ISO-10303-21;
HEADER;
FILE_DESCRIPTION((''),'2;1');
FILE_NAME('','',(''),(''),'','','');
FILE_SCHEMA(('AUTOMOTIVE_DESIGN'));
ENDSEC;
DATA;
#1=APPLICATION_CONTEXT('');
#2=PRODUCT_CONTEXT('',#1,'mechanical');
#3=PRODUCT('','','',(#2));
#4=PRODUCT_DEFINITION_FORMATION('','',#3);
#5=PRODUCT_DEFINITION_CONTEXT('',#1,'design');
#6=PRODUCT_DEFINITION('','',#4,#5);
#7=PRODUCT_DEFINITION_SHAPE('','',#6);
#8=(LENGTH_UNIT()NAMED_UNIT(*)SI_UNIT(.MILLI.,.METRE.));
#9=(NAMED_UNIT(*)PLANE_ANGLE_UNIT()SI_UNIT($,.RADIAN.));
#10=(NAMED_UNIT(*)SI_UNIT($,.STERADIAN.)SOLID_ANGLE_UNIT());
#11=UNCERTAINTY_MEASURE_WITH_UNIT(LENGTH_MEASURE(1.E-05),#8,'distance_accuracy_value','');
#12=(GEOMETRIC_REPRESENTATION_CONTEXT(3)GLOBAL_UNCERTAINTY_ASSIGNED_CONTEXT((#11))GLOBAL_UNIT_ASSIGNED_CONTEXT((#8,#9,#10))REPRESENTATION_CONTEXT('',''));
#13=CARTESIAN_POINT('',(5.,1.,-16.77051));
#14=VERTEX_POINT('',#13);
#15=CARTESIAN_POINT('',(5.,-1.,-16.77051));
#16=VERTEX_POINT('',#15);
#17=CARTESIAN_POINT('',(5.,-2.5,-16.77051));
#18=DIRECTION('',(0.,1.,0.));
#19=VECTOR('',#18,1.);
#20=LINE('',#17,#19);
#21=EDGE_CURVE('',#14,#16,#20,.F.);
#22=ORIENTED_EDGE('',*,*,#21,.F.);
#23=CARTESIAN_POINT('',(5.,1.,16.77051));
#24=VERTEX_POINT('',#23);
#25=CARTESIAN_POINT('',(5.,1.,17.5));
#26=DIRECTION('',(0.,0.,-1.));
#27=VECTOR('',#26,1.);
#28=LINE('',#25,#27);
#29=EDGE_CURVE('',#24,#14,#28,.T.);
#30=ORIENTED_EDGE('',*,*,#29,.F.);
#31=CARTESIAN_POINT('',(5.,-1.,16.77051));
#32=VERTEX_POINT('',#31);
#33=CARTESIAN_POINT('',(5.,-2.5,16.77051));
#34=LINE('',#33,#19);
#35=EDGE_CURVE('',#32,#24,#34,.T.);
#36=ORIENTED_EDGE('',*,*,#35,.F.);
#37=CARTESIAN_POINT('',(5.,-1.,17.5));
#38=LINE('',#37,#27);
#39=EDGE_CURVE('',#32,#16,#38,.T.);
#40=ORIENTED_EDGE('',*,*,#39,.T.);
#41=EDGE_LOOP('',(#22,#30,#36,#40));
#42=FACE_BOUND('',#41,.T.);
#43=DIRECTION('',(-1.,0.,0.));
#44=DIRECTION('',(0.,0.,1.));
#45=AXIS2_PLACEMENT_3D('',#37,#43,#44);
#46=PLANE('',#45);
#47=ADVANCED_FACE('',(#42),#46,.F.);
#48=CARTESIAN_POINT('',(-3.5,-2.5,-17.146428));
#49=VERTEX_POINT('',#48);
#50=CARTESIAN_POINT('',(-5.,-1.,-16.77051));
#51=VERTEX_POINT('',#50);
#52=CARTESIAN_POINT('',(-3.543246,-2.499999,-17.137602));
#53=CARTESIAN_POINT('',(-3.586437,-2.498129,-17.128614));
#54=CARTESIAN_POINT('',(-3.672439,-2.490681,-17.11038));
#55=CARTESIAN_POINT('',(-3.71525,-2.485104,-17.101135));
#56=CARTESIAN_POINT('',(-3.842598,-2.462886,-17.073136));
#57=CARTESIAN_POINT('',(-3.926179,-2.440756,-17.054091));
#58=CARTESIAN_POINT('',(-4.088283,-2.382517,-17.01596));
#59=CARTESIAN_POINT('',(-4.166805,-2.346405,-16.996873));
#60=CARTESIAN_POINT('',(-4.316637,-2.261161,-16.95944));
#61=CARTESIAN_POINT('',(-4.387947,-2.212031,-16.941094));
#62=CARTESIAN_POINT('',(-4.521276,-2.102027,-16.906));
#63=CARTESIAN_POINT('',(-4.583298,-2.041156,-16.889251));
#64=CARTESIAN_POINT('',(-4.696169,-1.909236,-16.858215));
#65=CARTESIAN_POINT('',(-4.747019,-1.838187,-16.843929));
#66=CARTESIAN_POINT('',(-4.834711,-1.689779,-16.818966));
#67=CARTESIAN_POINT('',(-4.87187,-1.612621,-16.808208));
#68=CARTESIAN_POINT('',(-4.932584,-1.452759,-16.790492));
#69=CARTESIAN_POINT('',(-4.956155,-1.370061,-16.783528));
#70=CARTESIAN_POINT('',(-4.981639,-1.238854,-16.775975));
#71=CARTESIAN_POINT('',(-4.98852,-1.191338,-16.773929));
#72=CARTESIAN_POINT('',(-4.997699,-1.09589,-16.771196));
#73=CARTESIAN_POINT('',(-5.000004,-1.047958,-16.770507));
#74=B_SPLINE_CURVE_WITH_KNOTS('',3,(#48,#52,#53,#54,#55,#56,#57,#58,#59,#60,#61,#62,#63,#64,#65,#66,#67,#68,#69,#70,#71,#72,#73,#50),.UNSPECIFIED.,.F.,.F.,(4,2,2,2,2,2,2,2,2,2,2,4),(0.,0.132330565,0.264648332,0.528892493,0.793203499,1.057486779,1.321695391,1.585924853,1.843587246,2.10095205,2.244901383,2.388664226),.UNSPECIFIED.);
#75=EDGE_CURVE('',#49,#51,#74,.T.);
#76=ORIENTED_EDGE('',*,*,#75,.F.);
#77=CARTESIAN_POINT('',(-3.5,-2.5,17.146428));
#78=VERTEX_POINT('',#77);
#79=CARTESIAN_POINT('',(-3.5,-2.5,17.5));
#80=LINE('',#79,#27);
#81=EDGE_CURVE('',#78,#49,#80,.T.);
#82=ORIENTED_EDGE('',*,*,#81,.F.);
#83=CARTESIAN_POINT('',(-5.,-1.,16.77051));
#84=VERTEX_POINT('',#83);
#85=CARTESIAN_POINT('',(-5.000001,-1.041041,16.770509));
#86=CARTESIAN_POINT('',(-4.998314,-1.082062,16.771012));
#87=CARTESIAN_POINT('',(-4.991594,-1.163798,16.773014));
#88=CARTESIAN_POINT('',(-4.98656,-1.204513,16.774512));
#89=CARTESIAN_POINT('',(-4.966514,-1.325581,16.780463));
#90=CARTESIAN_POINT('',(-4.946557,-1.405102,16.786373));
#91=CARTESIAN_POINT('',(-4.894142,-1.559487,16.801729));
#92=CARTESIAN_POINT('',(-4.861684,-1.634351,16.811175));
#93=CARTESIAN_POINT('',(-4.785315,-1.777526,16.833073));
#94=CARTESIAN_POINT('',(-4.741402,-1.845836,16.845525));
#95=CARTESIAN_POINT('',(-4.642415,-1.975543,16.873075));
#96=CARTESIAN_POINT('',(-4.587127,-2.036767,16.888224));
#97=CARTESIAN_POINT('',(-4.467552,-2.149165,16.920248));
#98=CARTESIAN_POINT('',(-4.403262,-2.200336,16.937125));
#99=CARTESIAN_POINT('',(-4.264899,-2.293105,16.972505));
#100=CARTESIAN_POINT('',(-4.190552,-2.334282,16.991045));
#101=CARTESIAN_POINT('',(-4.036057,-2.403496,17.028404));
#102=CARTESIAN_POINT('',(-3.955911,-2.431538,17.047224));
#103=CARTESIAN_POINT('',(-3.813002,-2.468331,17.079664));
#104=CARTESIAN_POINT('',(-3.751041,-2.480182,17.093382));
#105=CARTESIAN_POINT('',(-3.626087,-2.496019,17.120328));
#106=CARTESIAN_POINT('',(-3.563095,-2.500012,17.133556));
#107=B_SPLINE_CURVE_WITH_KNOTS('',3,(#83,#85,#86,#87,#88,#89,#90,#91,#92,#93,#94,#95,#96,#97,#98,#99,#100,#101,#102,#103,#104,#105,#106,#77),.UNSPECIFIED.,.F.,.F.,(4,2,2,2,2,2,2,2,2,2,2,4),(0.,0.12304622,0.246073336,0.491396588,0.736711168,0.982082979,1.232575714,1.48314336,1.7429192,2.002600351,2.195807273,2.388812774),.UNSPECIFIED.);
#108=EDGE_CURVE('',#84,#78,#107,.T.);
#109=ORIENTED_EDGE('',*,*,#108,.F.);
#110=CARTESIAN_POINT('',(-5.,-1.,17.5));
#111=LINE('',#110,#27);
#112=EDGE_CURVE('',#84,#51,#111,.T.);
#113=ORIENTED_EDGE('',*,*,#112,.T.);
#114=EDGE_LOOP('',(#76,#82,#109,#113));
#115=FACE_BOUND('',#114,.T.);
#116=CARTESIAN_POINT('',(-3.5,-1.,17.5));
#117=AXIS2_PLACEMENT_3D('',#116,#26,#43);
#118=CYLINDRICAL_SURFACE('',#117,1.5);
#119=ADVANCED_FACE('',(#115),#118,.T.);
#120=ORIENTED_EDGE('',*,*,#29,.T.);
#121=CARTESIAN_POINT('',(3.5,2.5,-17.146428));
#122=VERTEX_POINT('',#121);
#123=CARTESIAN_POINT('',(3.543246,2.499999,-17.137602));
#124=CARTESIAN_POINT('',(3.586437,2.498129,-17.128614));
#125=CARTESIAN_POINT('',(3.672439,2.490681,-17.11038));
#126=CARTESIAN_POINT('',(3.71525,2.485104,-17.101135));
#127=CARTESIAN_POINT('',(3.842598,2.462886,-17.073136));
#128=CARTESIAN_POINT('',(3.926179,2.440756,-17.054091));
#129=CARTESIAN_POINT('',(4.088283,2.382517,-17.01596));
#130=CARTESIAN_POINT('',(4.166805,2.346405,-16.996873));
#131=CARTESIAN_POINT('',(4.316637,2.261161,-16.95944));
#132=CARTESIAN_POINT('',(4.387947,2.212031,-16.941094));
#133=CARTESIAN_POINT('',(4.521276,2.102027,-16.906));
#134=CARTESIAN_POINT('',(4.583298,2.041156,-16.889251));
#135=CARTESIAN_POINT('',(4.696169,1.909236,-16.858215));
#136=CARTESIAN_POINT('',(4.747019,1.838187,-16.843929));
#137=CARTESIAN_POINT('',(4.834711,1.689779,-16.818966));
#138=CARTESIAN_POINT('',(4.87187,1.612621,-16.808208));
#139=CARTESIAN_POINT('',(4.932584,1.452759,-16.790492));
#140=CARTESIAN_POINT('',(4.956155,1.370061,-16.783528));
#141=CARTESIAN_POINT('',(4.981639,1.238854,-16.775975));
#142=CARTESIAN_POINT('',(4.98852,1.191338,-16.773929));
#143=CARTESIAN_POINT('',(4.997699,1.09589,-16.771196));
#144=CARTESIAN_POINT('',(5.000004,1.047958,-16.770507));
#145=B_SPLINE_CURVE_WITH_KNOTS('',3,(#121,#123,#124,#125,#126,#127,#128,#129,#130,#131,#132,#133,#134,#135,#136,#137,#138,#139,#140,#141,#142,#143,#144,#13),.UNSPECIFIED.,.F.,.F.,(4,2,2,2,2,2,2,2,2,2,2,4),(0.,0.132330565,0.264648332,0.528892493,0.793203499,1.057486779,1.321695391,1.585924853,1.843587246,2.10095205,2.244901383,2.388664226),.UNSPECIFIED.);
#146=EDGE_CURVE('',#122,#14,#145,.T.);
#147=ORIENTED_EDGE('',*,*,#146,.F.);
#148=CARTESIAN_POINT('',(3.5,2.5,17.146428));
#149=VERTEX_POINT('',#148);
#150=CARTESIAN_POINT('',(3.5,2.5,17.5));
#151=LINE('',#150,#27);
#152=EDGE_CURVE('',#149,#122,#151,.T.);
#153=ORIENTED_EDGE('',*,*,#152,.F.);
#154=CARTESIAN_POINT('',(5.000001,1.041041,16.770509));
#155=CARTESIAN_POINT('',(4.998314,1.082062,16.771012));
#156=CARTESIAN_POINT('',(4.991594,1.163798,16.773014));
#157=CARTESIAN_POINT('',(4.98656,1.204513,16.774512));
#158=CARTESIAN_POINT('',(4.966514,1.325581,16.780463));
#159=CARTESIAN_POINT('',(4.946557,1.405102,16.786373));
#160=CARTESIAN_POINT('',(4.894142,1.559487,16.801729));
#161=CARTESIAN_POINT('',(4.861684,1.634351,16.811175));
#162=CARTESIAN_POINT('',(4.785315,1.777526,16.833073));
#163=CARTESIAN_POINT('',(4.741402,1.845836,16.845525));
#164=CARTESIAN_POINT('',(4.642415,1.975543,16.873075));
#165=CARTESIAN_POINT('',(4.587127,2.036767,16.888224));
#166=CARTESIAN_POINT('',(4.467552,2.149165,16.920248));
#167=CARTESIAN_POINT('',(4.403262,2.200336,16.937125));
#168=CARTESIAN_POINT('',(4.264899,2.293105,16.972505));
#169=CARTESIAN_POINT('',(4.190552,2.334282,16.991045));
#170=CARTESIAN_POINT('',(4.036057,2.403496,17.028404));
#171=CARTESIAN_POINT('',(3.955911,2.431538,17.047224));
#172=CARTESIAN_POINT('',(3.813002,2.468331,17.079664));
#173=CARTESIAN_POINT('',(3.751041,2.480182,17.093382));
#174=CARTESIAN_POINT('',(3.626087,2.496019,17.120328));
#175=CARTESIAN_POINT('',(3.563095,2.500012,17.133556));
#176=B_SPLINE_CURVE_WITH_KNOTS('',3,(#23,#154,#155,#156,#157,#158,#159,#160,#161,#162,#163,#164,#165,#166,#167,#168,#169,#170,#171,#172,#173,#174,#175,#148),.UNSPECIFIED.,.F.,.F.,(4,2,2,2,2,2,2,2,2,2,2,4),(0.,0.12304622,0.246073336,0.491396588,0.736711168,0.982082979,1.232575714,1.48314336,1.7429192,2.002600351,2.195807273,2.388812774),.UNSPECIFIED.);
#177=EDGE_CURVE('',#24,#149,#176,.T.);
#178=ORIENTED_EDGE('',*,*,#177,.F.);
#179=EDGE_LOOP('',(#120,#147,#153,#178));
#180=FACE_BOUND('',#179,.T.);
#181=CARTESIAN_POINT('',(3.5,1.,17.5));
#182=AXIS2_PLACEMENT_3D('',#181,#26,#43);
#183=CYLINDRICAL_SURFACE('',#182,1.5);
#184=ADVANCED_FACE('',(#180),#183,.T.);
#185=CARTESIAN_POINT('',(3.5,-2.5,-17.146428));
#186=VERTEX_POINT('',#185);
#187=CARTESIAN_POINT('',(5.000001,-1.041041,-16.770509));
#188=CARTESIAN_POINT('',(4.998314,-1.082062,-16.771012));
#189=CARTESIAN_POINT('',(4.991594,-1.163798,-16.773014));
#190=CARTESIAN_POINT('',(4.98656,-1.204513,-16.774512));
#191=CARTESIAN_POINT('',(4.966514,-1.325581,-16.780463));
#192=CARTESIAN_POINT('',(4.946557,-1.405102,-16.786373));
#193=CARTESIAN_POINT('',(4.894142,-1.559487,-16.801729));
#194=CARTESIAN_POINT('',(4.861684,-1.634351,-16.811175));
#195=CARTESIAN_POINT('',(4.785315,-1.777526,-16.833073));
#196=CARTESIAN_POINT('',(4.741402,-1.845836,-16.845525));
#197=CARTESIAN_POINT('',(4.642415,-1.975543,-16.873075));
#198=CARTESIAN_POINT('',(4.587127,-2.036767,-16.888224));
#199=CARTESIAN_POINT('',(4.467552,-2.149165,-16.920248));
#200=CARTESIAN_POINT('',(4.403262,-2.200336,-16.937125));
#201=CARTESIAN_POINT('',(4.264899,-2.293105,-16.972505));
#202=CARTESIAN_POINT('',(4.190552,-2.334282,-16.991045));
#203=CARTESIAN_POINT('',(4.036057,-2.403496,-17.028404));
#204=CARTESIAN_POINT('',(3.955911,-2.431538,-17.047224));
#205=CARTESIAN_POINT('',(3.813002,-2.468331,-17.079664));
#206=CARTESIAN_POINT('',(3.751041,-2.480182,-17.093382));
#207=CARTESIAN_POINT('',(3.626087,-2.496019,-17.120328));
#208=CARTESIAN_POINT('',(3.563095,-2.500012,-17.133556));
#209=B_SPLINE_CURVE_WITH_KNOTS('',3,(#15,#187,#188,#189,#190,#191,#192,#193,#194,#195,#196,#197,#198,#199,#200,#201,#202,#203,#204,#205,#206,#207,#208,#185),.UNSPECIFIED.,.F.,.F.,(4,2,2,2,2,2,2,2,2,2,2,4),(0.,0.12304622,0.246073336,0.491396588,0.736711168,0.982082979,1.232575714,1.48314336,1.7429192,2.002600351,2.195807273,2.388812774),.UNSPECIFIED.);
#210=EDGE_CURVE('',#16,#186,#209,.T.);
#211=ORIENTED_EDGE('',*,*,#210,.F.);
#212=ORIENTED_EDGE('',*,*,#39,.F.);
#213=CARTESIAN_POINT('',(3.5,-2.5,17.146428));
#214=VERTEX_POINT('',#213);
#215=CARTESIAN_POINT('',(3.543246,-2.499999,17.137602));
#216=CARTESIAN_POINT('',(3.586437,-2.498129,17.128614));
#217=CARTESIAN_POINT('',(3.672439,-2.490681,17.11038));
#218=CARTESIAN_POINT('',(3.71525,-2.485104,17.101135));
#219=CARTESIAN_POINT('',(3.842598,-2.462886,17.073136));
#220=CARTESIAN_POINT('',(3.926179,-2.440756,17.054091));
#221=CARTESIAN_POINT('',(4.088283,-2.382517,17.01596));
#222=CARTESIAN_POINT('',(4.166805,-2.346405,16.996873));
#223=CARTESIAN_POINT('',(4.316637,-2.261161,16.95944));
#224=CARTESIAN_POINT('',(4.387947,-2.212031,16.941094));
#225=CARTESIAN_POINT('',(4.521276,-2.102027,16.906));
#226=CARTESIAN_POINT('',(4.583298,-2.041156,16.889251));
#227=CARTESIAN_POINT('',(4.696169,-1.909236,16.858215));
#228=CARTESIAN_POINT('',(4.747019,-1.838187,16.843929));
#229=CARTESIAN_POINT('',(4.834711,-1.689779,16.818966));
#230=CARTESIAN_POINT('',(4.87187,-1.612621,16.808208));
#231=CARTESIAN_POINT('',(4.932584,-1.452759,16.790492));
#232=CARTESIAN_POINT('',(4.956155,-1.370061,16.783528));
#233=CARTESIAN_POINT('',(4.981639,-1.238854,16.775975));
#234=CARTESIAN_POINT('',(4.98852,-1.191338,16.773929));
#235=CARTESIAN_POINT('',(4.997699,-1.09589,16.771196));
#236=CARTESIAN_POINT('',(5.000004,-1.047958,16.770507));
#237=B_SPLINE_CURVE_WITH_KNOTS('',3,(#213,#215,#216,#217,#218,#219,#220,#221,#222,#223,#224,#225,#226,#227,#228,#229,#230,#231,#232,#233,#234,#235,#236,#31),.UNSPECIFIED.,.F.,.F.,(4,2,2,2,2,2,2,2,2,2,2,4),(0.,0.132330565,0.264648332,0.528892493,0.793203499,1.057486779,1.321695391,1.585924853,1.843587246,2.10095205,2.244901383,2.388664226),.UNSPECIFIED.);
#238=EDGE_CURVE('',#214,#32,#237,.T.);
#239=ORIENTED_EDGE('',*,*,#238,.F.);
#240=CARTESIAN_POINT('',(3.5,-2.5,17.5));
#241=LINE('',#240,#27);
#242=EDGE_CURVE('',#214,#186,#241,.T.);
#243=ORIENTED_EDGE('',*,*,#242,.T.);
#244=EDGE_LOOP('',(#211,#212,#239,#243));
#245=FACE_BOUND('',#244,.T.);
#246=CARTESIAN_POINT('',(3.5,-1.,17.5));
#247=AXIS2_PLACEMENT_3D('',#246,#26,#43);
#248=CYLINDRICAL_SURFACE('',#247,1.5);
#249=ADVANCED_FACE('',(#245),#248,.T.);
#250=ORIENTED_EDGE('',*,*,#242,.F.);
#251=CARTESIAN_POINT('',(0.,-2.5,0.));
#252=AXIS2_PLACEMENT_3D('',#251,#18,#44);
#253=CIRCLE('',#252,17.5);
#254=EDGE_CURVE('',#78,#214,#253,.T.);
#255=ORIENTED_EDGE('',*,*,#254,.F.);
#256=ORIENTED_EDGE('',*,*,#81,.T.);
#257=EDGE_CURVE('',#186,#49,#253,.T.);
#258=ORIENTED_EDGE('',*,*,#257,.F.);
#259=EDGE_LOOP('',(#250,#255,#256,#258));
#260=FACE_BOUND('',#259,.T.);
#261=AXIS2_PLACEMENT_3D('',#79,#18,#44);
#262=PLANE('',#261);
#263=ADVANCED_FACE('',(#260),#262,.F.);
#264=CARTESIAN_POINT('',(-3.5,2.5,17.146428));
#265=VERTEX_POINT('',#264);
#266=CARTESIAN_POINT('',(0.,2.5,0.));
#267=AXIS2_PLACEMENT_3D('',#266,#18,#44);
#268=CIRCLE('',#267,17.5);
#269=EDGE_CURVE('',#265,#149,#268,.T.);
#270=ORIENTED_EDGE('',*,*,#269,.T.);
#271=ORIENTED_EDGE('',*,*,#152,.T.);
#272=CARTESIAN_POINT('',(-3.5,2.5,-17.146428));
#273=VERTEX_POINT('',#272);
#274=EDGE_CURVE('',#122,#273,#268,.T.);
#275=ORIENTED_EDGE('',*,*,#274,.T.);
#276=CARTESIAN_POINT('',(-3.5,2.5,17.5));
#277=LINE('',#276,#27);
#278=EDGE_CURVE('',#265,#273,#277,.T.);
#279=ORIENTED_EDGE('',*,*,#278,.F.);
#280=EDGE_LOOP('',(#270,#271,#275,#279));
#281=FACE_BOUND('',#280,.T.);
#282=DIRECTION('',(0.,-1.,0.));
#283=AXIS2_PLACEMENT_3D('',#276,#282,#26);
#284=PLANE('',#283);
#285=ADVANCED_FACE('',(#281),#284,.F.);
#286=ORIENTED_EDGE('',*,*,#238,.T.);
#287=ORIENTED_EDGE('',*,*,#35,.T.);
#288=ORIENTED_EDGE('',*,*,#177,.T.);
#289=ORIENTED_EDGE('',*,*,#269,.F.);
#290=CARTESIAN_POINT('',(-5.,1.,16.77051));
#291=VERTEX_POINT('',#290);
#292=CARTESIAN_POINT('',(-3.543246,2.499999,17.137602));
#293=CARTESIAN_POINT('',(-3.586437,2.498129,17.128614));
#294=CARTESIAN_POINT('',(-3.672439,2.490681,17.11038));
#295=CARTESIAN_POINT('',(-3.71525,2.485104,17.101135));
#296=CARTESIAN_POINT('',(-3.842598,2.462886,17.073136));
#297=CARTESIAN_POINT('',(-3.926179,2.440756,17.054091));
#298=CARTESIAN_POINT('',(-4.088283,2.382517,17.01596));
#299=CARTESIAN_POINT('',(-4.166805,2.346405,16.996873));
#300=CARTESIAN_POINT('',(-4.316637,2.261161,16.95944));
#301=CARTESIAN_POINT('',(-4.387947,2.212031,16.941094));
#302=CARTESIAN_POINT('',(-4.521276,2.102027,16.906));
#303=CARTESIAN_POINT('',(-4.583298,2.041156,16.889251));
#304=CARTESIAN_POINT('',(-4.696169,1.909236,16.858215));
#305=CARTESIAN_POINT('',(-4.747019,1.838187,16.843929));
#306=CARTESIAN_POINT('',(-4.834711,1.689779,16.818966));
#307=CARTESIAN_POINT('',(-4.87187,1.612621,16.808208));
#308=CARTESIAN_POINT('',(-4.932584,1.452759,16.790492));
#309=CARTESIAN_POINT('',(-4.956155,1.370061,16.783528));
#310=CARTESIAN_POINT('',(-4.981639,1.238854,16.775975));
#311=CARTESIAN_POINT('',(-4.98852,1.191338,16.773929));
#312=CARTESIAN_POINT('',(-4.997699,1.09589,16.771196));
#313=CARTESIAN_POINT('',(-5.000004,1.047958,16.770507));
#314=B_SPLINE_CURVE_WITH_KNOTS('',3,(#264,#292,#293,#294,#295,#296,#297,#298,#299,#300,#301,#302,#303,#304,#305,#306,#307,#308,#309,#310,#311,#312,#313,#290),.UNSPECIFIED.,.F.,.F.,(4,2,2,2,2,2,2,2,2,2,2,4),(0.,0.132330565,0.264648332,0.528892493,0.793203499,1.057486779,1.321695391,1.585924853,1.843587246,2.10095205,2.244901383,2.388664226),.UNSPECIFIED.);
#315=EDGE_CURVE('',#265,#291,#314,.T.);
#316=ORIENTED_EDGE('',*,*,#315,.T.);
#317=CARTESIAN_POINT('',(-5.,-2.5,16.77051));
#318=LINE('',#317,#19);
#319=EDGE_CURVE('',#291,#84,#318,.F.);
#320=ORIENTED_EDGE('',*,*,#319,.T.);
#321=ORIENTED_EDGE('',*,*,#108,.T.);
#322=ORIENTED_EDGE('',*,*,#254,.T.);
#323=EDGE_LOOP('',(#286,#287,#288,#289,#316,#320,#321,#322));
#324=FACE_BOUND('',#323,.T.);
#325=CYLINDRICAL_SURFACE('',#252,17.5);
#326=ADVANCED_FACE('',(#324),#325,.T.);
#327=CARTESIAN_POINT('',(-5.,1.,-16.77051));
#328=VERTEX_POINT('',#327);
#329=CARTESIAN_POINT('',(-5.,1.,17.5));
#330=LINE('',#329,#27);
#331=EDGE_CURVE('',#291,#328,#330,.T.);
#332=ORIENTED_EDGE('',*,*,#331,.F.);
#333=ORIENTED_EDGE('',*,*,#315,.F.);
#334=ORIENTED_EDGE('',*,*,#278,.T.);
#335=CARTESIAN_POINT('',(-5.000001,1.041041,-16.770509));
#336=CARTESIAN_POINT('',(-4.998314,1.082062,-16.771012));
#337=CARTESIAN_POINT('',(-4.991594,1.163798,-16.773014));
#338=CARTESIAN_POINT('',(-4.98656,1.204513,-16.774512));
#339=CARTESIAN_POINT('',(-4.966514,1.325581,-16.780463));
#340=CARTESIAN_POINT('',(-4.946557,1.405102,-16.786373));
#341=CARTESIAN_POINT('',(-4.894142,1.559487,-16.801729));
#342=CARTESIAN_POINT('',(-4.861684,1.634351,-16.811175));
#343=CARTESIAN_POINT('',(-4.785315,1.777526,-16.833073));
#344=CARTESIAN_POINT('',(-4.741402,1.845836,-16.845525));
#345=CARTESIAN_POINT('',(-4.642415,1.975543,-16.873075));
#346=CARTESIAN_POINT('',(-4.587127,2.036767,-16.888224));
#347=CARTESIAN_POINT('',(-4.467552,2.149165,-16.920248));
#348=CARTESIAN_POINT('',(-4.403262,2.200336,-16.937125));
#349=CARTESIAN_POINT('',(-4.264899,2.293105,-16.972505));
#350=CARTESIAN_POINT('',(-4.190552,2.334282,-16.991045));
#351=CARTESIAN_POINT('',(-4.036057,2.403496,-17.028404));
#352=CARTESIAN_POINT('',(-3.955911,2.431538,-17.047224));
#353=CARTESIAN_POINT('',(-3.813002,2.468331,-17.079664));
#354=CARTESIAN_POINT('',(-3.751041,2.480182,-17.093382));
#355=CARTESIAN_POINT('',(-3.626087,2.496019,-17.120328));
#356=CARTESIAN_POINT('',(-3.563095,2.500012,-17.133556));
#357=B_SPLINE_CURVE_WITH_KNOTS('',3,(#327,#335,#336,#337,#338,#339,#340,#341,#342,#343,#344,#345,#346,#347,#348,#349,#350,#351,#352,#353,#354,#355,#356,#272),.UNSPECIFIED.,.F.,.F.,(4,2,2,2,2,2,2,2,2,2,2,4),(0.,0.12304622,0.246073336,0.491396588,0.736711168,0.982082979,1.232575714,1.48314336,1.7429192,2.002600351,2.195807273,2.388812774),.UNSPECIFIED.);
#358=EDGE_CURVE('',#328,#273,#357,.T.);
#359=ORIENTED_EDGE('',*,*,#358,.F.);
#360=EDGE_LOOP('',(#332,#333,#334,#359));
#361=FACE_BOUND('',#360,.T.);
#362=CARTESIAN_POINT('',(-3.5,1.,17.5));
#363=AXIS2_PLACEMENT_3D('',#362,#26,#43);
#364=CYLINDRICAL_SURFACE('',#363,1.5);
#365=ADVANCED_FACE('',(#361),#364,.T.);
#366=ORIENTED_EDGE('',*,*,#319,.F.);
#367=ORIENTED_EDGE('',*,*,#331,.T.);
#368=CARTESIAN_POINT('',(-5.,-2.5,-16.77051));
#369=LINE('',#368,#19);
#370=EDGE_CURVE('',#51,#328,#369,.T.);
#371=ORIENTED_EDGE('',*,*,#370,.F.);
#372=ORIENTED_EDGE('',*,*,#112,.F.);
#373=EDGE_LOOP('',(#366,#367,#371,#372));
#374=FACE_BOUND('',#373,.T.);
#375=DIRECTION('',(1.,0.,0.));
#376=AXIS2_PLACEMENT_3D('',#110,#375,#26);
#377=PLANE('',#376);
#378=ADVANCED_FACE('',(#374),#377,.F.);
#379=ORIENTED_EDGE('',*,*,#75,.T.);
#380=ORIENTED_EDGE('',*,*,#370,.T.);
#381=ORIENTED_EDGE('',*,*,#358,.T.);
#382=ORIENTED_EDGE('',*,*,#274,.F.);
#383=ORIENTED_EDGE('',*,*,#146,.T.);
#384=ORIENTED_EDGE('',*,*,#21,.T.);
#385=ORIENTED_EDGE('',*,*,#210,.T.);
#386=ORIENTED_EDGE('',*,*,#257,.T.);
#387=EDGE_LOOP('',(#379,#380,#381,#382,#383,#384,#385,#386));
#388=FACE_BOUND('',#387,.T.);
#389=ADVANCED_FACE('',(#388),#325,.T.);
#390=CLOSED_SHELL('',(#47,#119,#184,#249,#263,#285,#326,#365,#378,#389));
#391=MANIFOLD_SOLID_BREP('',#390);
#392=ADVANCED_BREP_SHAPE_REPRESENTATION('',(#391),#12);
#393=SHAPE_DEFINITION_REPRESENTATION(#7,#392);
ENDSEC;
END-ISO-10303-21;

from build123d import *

# Parameters (mm, degrees)
BOSS_EXTRUDE1_DEPTH = 17.5
CUT_EXTRUDE1_START  = -2.5
CUT_EXTRUDE1_DEPTH  = 5


# Read off the part's stored shape, not the designer's step: Cut-Extrude1
with BuildPart() as part:
    # Sketch1 → Boss-Extrude1 (new, symmetric)
    with BuildSketch(Plane.XY):
        with BuildLine():
            Line((-3.5, -2.5), (3.5, -2.5))
            ThreePointArc((3.5, -2.5), (4.560660172, -2.060660172), (5, -1))
            Line((5, -1), (5, 1))
            ThreePointArc((5, 1), (4.560660172, 2.060660172), (3.5, 2.5))
            Line((3.5, 2.5), (-3.5, 2.5))
            ThreePointArc((-3.5, 2.5), (-4.560660172, 2.060660172), (-5, 1))
            Line((-5, 1), (-5, -1))
            ThreePointArc((-5, -1), (-4.560660172, -2.060660172), (-3.5, -2.5))
        make_face()
    extrude(amount=BOSS_EXTRUDE1_DEPTH, both=True)

    # Cut-Extrude1 outline → Cut-Extrude1 (cut)
    with BuildSketch(Plane(origin=(0, 0, 0), x_dir=(1, 0, 0), z_dir=(0, 1, 0)).offset(CUT_EXTRUDE1_START)):
        with BuildLine():
            ThreePointArc((-1.03e-07, -17.5), (-2.52646852, -17.316667024), (-5.000001513, -16.77050938))
            Line((-5.000001513, -16.77050938), (-5, -17.5))
            Line((-5, -17.5), (-1.03e-07, -17.5))
        make_face()
        with BuildLine():
            ThreePointArc((5.000001513, -16.77050938), (2.526468418, -17.316667039), (-1.03e-07, -17.5))
            Line((-1.03e-07, -17.5), (5, -17.5))
            Line((5, -17.5), (5.000001513, -16.77050938))
        make_face()
        with BuildLine():
            Line((-5, 17.5), (-5.000001513, 16.77050938))
            ThreePointArc((-5.000001513, 16.77050938), (-2.526468418, 17.316667039), (1.03e-07, 17.5))
            Line((1.03e-07, 17.5), (-5, 17.5))
        make_face()
        with BuildLine():
            Line((5, 17.5), (1.03e-07, 17.5))
            ThreePointArc((1.03e-07, 17.5), (2.52646852, 17.316667024), (5.000001513, 16.77050938))
            Line((5.000001513, 16.77050938), (5, 17.5))
        make_face()
    extrude(amount=CUT_EXTRUDE1_DEPTH, mode=Mode.SUBTRACT)


solid = part.part
